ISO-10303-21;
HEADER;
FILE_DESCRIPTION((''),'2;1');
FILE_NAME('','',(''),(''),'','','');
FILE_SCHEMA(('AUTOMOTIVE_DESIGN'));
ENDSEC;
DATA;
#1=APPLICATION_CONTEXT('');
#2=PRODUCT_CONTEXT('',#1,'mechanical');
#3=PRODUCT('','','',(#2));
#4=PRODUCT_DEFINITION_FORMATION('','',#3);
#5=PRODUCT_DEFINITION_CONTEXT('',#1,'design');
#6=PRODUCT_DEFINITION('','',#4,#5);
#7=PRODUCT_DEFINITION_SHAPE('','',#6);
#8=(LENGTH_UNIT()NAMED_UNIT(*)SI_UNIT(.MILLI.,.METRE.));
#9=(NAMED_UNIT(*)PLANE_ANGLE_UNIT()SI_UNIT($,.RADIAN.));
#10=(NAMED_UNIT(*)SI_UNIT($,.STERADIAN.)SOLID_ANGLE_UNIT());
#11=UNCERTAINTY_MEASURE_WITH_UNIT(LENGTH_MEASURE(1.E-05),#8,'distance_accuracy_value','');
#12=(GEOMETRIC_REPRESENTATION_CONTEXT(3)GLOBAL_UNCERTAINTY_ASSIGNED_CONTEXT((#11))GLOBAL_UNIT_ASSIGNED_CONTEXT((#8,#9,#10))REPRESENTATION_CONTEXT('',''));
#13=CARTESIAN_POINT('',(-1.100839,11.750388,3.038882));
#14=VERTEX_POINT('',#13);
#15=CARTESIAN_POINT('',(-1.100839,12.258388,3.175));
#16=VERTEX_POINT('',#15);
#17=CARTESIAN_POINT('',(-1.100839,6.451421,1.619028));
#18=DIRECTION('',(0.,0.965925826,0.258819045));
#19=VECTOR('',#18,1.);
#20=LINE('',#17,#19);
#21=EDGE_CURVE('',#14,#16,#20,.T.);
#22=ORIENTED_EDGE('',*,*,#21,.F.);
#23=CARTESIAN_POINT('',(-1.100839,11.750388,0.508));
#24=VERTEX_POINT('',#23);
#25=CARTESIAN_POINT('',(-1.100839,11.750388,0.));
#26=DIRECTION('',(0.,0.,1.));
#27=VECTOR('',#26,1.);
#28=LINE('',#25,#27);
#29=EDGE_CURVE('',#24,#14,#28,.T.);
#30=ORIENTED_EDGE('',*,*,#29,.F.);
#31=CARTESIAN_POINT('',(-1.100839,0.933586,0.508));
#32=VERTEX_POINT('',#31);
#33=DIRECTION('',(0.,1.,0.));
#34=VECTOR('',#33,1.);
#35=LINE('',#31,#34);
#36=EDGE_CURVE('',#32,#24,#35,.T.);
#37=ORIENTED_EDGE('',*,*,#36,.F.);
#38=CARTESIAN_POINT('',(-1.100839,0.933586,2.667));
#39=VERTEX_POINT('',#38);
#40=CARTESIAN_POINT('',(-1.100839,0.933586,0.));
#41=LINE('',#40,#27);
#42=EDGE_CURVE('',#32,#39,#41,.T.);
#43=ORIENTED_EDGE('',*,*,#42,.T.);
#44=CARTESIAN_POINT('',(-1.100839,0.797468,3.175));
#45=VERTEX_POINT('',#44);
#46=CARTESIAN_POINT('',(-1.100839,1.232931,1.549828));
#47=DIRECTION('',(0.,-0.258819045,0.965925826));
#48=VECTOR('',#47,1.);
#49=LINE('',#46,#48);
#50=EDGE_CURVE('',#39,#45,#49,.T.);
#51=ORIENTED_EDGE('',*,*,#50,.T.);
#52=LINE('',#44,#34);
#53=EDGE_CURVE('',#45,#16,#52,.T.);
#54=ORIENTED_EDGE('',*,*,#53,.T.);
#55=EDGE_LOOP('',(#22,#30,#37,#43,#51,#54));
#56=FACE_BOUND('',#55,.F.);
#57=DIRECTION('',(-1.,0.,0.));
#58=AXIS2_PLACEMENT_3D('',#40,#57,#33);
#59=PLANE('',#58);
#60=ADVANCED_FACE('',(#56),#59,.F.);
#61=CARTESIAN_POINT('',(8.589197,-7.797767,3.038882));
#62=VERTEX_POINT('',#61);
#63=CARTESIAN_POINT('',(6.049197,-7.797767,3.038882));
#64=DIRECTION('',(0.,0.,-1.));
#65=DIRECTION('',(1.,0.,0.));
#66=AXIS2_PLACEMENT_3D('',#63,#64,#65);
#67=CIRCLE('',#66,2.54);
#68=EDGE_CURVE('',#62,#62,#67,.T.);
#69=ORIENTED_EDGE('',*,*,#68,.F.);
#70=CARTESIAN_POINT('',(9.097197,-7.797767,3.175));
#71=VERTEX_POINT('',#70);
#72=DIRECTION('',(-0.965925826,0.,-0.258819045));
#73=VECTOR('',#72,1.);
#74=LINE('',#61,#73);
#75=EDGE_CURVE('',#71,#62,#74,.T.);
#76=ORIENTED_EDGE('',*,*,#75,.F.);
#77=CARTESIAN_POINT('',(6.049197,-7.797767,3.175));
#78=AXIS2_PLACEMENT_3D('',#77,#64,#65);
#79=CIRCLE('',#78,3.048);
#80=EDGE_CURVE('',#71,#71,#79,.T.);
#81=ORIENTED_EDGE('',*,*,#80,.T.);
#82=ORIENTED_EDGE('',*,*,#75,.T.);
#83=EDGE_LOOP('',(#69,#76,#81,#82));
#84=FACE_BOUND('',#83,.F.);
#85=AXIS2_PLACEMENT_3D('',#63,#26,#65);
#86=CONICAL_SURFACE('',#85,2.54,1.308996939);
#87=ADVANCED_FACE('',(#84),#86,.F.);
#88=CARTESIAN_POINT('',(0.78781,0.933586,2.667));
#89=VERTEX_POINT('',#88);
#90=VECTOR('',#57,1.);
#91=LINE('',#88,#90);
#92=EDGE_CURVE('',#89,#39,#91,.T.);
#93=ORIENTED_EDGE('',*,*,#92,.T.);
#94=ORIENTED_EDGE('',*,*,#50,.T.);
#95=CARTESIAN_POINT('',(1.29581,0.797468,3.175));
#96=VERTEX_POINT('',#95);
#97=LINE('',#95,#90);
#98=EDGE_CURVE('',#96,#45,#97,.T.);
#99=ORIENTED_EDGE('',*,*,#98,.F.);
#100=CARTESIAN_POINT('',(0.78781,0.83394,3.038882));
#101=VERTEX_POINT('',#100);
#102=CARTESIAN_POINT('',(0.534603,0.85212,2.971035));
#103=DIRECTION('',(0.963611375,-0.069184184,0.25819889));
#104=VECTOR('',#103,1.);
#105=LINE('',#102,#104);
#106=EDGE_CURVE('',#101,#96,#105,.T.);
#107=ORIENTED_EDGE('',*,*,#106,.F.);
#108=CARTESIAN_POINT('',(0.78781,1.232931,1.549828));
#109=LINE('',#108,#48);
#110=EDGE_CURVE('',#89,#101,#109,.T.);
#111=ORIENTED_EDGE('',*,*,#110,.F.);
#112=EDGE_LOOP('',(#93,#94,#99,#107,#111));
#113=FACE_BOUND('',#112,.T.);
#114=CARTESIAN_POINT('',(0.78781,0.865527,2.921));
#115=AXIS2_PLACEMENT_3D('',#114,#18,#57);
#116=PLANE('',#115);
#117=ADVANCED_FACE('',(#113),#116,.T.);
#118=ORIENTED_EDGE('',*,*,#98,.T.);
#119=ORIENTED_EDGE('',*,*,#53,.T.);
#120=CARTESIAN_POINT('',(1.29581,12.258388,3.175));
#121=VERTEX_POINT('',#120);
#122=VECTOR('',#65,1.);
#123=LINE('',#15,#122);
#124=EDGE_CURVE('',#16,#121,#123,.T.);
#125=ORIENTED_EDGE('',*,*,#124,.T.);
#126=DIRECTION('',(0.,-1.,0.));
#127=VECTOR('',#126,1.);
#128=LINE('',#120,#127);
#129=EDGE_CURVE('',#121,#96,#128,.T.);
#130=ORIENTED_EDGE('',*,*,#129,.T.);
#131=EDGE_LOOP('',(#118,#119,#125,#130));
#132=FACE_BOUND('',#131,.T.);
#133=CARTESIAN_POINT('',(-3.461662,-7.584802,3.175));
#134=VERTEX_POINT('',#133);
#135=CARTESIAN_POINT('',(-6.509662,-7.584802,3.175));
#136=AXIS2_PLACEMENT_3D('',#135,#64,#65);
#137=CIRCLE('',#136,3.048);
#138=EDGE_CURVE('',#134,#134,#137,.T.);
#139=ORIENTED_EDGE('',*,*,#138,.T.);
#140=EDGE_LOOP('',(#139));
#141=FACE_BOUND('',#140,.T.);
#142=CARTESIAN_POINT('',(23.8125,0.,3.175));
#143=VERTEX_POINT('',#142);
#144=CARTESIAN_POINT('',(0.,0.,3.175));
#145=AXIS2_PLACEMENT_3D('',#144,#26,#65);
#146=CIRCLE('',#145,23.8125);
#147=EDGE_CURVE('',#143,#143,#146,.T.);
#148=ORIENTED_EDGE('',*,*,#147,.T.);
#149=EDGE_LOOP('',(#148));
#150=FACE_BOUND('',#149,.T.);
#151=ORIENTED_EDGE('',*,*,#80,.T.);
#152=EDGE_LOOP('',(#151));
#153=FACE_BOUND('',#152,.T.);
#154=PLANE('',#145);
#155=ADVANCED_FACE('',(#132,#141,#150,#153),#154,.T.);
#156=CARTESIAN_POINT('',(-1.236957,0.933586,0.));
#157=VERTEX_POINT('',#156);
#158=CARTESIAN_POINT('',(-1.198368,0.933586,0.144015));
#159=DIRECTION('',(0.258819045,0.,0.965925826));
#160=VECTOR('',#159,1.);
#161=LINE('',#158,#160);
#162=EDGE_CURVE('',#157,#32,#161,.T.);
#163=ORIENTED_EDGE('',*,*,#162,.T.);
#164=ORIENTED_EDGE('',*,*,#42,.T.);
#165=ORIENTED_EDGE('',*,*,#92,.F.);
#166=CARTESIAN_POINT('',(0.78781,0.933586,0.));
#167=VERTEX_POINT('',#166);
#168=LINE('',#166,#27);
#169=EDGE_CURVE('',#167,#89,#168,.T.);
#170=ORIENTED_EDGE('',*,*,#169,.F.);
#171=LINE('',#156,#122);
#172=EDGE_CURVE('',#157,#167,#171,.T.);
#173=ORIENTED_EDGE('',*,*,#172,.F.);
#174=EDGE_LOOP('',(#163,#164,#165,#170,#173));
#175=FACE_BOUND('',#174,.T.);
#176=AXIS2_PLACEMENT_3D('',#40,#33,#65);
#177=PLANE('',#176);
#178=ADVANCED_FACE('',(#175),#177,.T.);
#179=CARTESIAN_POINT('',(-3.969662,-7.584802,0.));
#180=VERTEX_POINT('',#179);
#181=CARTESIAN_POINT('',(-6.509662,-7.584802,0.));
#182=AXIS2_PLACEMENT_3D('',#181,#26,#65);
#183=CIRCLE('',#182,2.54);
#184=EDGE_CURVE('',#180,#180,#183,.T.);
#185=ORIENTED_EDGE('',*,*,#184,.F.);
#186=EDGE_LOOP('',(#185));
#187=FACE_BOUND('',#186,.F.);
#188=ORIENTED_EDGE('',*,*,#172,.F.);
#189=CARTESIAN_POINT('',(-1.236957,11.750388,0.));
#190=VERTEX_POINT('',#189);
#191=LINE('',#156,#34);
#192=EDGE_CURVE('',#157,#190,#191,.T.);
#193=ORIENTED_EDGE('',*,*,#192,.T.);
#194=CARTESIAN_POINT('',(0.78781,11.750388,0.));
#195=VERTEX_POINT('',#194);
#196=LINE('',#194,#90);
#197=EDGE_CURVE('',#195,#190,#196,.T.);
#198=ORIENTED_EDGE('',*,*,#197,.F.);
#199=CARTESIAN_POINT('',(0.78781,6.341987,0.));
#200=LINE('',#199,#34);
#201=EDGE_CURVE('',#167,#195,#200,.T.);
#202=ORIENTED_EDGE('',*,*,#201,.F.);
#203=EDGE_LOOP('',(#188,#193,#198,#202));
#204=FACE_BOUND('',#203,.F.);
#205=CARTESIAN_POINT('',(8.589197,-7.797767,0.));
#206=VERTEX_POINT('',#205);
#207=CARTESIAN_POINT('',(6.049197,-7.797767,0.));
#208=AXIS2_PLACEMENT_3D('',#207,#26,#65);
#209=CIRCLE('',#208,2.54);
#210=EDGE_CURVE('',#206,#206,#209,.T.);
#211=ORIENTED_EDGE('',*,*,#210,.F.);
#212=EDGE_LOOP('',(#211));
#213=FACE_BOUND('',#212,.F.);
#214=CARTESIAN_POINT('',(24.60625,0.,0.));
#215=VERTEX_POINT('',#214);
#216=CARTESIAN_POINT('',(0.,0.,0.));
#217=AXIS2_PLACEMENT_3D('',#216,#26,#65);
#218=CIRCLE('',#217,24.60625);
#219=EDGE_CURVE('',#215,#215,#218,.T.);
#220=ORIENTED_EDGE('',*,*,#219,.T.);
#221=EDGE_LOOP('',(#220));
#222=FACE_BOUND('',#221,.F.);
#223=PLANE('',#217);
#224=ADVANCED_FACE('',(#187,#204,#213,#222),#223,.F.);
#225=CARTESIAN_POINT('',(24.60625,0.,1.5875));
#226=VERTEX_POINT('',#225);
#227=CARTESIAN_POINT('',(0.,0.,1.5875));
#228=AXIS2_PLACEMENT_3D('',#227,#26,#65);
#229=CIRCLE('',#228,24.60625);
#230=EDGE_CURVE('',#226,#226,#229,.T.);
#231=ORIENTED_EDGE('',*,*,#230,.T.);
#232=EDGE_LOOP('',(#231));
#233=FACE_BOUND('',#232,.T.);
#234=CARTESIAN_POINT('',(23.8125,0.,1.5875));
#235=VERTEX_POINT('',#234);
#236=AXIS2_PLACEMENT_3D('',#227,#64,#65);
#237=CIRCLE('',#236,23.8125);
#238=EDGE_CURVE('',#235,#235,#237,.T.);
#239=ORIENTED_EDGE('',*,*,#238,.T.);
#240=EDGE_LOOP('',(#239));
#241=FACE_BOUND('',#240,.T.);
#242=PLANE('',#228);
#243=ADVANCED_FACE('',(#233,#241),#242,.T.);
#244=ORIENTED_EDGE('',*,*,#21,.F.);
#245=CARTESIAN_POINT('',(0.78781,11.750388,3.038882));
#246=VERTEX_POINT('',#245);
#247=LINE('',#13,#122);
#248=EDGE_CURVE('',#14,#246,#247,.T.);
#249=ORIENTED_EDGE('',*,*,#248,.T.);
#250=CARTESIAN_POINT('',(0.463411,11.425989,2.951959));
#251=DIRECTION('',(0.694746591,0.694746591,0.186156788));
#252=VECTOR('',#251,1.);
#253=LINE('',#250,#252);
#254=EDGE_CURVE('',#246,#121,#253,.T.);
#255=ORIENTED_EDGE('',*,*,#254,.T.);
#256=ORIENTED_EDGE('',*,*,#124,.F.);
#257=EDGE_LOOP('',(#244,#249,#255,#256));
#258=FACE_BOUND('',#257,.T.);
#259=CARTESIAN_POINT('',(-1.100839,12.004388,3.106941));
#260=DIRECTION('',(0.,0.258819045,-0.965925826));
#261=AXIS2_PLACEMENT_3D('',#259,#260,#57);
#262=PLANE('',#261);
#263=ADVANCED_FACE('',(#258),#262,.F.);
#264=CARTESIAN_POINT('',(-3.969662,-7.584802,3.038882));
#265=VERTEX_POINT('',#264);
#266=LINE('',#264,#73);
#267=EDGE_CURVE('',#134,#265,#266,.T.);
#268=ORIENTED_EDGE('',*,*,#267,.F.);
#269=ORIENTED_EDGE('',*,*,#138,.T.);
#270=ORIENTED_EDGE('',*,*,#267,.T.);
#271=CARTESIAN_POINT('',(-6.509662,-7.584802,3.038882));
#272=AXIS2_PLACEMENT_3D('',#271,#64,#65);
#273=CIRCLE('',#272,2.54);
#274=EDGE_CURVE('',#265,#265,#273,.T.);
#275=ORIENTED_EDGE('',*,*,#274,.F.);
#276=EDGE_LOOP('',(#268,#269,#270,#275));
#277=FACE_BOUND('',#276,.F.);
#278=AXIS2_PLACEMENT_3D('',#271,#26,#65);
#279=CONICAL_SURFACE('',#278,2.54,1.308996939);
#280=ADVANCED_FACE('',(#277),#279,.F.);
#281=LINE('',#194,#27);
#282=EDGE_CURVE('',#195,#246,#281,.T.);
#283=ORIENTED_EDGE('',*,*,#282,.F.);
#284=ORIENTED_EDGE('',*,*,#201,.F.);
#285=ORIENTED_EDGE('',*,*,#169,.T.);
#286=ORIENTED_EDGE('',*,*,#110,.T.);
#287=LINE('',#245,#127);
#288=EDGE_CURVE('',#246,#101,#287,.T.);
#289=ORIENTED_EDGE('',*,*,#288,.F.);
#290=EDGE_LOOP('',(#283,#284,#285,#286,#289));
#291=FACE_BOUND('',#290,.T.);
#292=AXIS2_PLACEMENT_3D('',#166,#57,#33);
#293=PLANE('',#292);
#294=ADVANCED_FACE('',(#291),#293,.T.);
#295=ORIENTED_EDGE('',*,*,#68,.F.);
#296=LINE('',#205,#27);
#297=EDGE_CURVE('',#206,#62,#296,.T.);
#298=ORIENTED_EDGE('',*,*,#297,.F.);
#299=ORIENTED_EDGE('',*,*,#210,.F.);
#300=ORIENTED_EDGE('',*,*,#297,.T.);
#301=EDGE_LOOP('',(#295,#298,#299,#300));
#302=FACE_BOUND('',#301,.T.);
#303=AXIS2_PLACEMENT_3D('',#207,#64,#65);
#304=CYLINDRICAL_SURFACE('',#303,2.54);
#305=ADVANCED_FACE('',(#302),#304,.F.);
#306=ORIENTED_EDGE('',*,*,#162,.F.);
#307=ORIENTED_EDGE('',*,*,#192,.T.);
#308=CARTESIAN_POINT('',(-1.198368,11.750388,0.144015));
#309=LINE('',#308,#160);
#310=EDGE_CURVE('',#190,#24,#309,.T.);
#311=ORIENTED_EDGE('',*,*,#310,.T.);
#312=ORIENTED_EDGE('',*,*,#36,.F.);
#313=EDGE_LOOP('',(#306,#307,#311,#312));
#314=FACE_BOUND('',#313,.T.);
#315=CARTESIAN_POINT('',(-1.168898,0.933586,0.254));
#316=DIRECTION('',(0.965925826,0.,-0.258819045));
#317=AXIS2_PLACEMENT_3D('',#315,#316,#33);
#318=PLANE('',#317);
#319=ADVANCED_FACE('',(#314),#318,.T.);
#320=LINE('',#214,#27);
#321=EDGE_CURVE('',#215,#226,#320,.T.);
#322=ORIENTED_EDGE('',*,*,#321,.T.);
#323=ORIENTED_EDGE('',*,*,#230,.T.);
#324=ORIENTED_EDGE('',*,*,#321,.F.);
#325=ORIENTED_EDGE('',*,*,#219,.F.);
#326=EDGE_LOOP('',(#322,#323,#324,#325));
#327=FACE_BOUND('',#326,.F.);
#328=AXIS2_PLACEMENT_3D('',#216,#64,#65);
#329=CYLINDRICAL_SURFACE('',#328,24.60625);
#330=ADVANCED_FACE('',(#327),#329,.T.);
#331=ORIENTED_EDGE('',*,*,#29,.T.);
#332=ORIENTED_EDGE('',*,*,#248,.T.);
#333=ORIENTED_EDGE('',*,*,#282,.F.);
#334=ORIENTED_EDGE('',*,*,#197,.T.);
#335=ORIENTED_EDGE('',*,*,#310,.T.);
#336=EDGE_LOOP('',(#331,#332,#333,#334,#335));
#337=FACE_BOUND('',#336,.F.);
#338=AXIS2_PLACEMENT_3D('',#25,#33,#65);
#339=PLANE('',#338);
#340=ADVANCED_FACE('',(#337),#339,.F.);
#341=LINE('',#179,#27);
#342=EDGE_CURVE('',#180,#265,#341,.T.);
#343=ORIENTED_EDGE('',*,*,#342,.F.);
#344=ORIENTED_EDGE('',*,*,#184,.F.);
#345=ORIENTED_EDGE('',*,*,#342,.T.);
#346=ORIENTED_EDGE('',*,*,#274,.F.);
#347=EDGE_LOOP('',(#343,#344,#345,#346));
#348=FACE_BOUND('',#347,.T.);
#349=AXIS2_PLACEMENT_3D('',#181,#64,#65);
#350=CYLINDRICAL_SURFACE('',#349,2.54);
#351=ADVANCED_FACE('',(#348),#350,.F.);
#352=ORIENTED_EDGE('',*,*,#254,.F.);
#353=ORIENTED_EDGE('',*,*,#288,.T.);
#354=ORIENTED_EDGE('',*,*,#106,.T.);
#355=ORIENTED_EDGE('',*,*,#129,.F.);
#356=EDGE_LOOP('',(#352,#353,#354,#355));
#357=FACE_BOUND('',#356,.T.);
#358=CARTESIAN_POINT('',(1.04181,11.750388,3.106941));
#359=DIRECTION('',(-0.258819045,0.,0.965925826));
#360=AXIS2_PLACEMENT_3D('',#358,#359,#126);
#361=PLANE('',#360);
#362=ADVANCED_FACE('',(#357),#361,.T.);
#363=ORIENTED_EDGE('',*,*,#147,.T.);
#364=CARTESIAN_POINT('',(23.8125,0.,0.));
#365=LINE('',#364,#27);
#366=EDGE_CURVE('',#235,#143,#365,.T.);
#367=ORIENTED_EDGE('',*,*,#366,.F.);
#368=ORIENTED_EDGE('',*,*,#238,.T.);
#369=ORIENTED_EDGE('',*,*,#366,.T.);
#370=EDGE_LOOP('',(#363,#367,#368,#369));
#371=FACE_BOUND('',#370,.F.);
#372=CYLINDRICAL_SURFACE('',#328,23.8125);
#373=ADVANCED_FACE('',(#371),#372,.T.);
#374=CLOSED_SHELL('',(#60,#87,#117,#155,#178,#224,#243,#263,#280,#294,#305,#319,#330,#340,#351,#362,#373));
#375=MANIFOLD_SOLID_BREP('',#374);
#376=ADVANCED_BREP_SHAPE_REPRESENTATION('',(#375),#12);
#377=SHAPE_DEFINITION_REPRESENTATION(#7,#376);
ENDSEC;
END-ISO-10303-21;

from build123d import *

# Parameters (mm, degrees)
F0_R         = 24.60625
F1_DEPTH     = 1.5875
F2_R         = 23.8125
F3_DEPTH     = 3.175
F6_W         = 1.888648374
F6_H         = 10.8168021543
F7_DEPTH     = 3.176
F5_R         = 2.54
F8_DEPTH     = 3.176
F4_R         = 2.54
F9_DEPTH     = 3.176
F10_C1_SIZE2 = 0.508
F10_C1_SIZE  = 0.1361181898
F10_C2_SIZE2 = 0.1361181898
F10_C2_SIZE  = 0.508
F10_C3_SIZE2 = 0.508
F10_C3_SIZE  = 0.1361181898
F10_C4_SIZE2 = 0.508
F10_C4_SIZE  = 0.1361181898
F11_SIZE2    = 0.1361181898
F11_SIZE     = 0.508
F12_SIZE2    = 0.1361181898
F12_SIZE     = 0.508


# Not quite as in the source:
# - a length typed as a fraction of an inch, garbled in the dataset ("3 / 203.2 mm" for 3/8 in), is restored


with BuildPart() as f1:
    # F0 (on Top) → F1 (new body)
    with BuildSketch(Plane.XY):
        Circle(F0_R)
    extrude(amount=F1_DEPTH)

    # F2 (on Top) → F3 (join)
    with BuildSketch(Plane.XY):
        Circle(F2_R)
    extrude(amount=F3_DEPTH)

    # F6 (on Top) → F7 (cut, through all)
    with BuildSketch(Plane.XY):
        with Locations((-0.156514463, 6.341986882)):
            Rectangle(F6_W, F6_H)
    extrude(amount=F7_DEPTH, mode=Mode.SUBTRACT)

    # F5 (on Top) → F8 (cut, through all)
    with BuildSketch(Plane.XY):
        with Locations((6.0491965251, -7.797766786)):
            Circle(F5_R)
    extrude(amount=F8_DEPTH, mode=Mode.SUBTRACT)

    # F4 (on Top) → F9 (cut, through all)
    with BuildSketch(Plane.XY):
        with Locations((-6.5096618418, -7.5848015673)):
            Circle(F4_R)
    extrude(amount=F9_DEPTH, mode=Mode.SUBTRACT)

    # F10: chamfer of 0.508 x 0.1361181898 on 4 edges, made by hand

    # F10_c1
    f10_c1_edges = [f1.edges().sort_by_distance(p)[0] for p in [
        (-1.10083865, 6.341986882, 0),
    ]]
    f10_c1_side = f1.faces().sort_by_distance((-1.1035610138, 6.341986882, 0))[0]
    chamfer(f10_c1_edges, length=F10_C1_SIZE, length2=F10_C1_SIZE2, reference=f10_c1_side)

    # F10_c2
    f10_c2_edges = [f1.edges().sort_by_distance(p)[0] for p in [
        (-0.156514463, 0.9335858049, 3.175),
    ]]
    f10_c2_side = f1.faces().sort_by_distance((-0.156514463, 0.9335858049, 3.1722776362))[0]
    chamfer(f10_c2_edges, length=F10_C2_SIZE, length2=F10_C2_SIZE2, reference=f10_c2_side)

    # F10_c3
    f10_c3_edges = [f1.edges().sort_by_distance(p)[0] for p in [
        (0.787809724, 6.341986882, 3.175),
    ]]
    f10_c3_side = f1.faces().sort_by_distance((0.787809724, 6.341986882, 3.1722776362))[0]
    chamfer(f10_c3_edges, length=F10_C3_SIZE, length2=F10_C3_SIZE2, reference=f10_c3_side)

    # F10_c4
    f10_c4_edges = [f1.edges().sort_by_distance(p)[0] for p in [
        (-0.156514463, 11.7503879592, 3.175),
    ]]
    f10_c4_side = f1.faces().sort_by_distance((-0.156514463, 11.7503879592, 3.1722776362))[0]
    chamfer(f10_c4_edges, length=F10_C4_SIZE, length2=F10_C4_SIZE2, reference=f10_c4_side)

    # F11
    f11_edges = [f1.edges().sort_by_distance(p)[0] for p in [
        (-9.049662, -7.584802, 3.175),
    ]]
    chamfer(f11_edges, length=F11_SIZE, length2=F11_SIZE2)

    # F12
    f12_edges = [f1.edges().sort_by_distance(p)[0] for p in [
        (3.509197, -7.797767, 3.175),
    ]]
    chamfer(f12_edges, length=F12_SIZE, length2=F12_SIZE2)


solid = f1.part
